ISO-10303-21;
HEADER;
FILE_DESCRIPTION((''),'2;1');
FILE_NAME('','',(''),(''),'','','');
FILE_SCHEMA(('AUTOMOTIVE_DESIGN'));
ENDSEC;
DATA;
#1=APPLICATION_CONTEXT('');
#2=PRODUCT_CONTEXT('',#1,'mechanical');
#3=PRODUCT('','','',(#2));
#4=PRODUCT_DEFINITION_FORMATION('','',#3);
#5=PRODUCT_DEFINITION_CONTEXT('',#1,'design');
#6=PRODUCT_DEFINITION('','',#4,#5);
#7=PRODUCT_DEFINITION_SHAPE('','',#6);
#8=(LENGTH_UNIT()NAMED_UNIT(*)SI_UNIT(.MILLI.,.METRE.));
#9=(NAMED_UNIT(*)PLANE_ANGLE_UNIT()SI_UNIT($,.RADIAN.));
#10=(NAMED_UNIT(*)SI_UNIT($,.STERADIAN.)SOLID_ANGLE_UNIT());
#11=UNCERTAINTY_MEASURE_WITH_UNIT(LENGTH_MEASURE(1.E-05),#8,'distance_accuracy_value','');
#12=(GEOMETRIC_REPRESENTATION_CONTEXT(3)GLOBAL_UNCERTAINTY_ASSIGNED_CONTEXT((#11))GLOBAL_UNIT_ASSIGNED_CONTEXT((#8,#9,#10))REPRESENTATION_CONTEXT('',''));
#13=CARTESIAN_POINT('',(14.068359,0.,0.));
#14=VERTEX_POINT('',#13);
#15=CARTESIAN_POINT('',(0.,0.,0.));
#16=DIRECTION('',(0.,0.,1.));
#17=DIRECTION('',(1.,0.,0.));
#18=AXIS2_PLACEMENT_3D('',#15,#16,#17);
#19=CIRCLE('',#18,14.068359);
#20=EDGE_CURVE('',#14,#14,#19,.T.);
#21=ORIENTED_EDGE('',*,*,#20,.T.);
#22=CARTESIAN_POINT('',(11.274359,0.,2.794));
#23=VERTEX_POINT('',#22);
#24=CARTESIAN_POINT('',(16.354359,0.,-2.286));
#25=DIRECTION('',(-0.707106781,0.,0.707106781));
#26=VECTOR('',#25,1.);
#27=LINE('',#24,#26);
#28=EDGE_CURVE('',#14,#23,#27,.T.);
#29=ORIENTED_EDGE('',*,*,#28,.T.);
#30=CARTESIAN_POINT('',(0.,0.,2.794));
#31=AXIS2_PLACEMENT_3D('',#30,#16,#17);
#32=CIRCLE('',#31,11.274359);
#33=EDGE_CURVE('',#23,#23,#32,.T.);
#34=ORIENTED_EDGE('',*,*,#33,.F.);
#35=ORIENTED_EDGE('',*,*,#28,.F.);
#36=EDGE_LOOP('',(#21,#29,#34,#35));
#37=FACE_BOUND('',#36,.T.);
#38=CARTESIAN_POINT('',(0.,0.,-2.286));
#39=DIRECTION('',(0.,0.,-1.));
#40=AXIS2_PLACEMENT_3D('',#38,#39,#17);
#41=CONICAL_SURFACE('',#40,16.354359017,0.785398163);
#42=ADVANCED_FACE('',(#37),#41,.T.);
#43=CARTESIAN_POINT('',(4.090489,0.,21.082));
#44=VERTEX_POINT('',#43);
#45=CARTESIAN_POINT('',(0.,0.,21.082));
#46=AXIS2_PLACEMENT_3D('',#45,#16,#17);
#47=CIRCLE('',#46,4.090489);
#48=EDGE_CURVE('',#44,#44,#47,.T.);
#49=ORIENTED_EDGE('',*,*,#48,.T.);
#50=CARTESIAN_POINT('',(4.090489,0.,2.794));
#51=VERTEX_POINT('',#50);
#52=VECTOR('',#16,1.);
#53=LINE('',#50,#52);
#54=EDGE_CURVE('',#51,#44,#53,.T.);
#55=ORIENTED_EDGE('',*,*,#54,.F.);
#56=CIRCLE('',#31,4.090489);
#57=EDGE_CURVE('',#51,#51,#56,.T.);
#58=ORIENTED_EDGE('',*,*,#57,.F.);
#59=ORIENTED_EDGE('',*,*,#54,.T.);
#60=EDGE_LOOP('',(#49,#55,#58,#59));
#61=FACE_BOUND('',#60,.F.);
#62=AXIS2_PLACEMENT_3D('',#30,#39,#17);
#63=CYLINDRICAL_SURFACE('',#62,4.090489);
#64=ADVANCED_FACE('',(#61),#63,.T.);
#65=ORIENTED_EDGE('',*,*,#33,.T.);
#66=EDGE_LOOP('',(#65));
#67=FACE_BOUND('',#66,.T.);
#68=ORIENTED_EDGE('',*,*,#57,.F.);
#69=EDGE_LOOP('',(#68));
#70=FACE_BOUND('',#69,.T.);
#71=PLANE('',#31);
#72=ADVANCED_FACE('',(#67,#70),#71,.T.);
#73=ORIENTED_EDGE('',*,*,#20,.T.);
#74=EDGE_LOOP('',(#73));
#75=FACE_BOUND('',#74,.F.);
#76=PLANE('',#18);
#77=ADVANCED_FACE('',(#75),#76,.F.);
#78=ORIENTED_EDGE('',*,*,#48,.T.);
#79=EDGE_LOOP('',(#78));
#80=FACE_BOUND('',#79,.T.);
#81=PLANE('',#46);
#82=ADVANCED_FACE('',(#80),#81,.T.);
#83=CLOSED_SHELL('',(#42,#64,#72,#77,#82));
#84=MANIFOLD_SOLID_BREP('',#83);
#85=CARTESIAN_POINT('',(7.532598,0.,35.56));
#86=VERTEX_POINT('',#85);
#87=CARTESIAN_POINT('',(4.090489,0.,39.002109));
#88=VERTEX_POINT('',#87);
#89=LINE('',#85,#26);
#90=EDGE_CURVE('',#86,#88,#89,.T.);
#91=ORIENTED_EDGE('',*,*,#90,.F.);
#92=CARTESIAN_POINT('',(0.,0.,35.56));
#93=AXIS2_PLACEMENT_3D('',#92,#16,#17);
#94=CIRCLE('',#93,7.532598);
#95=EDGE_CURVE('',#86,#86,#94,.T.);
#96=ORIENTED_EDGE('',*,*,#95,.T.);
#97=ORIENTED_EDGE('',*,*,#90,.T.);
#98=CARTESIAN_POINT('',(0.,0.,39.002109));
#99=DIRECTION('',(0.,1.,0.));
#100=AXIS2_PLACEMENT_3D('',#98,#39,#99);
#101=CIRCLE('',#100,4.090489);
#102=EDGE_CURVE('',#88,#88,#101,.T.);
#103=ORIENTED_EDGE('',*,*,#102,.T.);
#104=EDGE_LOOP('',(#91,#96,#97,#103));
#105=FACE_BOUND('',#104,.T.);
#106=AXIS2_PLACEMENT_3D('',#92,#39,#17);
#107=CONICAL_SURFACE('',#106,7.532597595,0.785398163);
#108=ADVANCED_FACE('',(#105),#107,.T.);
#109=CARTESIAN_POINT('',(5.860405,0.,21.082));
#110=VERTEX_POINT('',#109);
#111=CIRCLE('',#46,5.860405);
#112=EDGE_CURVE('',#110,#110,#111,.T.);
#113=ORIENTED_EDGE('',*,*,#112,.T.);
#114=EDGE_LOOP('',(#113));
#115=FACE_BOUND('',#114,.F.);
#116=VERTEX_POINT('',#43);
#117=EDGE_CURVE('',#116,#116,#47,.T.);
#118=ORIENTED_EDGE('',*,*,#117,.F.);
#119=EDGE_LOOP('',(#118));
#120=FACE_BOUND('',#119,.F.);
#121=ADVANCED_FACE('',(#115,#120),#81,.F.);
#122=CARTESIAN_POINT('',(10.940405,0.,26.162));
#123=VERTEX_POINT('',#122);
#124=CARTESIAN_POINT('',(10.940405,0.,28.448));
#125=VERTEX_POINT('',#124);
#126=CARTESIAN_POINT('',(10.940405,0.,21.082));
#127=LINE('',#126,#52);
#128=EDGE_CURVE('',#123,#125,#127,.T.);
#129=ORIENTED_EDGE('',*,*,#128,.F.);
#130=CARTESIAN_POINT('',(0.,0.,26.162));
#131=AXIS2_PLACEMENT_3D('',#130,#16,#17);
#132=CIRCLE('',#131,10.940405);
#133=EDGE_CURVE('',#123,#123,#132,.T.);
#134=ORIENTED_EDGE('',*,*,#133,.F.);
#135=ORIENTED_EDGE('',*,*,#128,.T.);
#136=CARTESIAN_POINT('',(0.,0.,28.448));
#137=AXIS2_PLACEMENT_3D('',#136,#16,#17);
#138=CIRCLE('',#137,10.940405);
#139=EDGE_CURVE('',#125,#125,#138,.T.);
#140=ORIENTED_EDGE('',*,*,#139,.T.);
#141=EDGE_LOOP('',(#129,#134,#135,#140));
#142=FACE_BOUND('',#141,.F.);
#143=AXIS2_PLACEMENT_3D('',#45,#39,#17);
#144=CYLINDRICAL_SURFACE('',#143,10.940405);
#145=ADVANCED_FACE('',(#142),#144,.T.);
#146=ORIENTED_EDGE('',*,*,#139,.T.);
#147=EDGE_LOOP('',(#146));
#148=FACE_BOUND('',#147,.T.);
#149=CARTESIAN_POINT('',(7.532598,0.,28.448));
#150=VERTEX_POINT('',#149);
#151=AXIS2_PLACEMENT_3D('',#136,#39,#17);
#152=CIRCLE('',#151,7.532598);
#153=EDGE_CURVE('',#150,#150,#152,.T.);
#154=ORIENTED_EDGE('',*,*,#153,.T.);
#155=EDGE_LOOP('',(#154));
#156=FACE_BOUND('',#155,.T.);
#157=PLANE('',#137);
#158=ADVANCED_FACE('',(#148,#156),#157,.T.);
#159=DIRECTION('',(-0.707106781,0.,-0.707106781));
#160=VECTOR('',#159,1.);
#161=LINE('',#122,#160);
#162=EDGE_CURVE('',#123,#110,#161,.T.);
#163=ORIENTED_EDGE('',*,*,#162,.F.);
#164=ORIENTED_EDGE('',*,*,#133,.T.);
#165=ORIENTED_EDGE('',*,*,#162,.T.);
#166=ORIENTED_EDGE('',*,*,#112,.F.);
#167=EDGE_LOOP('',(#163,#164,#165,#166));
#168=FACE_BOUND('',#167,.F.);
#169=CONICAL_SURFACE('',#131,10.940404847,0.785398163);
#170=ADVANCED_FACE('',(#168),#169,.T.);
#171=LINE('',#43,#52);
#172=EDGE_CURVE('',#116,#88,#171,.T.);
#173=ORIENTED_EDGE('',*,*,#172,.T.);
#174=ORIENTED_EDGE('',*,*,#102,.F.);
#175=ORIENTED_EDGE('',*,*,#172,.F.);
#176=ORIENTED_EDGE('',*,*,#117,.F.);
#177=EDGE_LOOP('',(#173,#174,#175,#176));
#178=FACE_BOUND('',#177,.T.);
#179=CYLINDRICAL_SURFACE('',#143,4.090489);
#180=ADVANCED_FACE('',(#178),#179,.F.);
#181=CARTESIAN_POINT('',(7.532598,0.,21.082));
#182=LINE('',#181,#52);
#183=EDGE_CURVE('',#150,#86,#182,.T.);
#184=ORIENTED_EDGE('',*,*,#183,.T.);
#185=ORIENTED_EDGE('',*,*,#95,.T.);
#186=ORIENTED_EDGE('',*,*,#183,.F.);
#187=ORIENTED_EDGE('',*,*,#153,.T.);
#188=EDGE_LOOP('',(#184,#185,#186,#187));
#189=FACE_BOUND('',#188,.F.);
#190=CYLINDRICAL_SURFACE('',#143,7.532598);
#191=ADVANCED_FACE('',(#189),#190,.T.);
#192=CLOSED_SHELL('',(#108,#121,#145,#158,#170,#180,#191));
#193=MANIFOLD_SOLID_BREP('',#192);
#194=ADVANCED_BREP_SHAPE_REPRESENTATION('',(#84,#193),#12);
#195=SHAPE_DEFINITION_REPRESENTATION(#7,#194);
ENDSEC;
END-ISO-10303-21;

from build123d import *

# Parameters (mm, degrees)
F0_R      = 16.354359017
F1_DEPTH  = 2.794
F5_R      = 4.0904887837
F6_DEPTH  = 18.288
F7_R      = 7.5325975951
F7_R_2    = 4.0904887837
F8_DEPTH  = 19.558
F10_R     = 10.9404048471
F10_R_2   = 4.0904887837
F11_DEPTH = 7.366
F12_SIZE  = 5.08


# Not quite as in the source:
# - a fillet or chamfer that OpenCascade refuses, or shapes differently, is made with other operations: its cross-section is extruded or revolved along the edge and cut away or added
# - the program builds the solid bodies; features that only make, move or delete a surface that nothing else refers to are left out


with BuildPart() as f1:
    # F0 (on Top) → F1 (new body)
    with BuildSketch(Plane.XY):
        Circle(F0_R)
    extrude(amount=F1_DEPTH)

    # F2: chamfer of 5.08 on 1 edges, made by hand

    # F2_s1 → F2_t2 (revolve, cut)
    with BuildSketch(Plane.XZ):
        Polygon((16.354359017, -2.286), (11.274359017, 2.794), (16.354359017, 2.794), align=None)
    revolve(axis=Axis((0, 0, 2.794), (0, 0, 1)), mode=Mode.SUBTRACT)

    # F5 (on face) → F6 (join)
    with BuildSketch(Plane.XY.offset(2.794)):
        Circle(F5_R)
    extrude(amount=F6_DEPTH)


with BuildPart() as f8:
    # F7 (on face) → F8 (new body)
    with BuildSketch(Plane.XY.offset(21.082)):
        Circle(F7_R)
        Circle(F7_R_2, mode=Mode.SUBTRACT)
    extrude(amount=F8_DEPTH)

    # F9: chamfer of 5.08 on 1 edges, made by hand

    # F9_s1 → F9_t2 (revolve, cut)
    with BuildSketch(Plane.XZ):
        Polygon((7.5325975951, 35.56), (2.4525975951, 40.64), (7.5325975951, 40.64), align=None)
    revolve(axis=Axis((0, 0, 40.64), (0, 0, 1)), mode=Mode.SUBTRACT)

    # F10 (on face) → F11 (join)
    with BuildSketch(Plane.XY.offset(21.082)):
        Circle(F10_R)
        Circle(F10_R_2, mode=Mode.SUBTRACT)
    extrude(amount=F11_DEPTH)

    # F12
    f12_edges = [f8.edges().sort_by_distance(p)[0] for p in [
        (-10.940405, 0, 21.082),
    ]]
    chamfer(f12_edges, length=F12_SIZE)


solid = Compound([f1.part, f8.part])
